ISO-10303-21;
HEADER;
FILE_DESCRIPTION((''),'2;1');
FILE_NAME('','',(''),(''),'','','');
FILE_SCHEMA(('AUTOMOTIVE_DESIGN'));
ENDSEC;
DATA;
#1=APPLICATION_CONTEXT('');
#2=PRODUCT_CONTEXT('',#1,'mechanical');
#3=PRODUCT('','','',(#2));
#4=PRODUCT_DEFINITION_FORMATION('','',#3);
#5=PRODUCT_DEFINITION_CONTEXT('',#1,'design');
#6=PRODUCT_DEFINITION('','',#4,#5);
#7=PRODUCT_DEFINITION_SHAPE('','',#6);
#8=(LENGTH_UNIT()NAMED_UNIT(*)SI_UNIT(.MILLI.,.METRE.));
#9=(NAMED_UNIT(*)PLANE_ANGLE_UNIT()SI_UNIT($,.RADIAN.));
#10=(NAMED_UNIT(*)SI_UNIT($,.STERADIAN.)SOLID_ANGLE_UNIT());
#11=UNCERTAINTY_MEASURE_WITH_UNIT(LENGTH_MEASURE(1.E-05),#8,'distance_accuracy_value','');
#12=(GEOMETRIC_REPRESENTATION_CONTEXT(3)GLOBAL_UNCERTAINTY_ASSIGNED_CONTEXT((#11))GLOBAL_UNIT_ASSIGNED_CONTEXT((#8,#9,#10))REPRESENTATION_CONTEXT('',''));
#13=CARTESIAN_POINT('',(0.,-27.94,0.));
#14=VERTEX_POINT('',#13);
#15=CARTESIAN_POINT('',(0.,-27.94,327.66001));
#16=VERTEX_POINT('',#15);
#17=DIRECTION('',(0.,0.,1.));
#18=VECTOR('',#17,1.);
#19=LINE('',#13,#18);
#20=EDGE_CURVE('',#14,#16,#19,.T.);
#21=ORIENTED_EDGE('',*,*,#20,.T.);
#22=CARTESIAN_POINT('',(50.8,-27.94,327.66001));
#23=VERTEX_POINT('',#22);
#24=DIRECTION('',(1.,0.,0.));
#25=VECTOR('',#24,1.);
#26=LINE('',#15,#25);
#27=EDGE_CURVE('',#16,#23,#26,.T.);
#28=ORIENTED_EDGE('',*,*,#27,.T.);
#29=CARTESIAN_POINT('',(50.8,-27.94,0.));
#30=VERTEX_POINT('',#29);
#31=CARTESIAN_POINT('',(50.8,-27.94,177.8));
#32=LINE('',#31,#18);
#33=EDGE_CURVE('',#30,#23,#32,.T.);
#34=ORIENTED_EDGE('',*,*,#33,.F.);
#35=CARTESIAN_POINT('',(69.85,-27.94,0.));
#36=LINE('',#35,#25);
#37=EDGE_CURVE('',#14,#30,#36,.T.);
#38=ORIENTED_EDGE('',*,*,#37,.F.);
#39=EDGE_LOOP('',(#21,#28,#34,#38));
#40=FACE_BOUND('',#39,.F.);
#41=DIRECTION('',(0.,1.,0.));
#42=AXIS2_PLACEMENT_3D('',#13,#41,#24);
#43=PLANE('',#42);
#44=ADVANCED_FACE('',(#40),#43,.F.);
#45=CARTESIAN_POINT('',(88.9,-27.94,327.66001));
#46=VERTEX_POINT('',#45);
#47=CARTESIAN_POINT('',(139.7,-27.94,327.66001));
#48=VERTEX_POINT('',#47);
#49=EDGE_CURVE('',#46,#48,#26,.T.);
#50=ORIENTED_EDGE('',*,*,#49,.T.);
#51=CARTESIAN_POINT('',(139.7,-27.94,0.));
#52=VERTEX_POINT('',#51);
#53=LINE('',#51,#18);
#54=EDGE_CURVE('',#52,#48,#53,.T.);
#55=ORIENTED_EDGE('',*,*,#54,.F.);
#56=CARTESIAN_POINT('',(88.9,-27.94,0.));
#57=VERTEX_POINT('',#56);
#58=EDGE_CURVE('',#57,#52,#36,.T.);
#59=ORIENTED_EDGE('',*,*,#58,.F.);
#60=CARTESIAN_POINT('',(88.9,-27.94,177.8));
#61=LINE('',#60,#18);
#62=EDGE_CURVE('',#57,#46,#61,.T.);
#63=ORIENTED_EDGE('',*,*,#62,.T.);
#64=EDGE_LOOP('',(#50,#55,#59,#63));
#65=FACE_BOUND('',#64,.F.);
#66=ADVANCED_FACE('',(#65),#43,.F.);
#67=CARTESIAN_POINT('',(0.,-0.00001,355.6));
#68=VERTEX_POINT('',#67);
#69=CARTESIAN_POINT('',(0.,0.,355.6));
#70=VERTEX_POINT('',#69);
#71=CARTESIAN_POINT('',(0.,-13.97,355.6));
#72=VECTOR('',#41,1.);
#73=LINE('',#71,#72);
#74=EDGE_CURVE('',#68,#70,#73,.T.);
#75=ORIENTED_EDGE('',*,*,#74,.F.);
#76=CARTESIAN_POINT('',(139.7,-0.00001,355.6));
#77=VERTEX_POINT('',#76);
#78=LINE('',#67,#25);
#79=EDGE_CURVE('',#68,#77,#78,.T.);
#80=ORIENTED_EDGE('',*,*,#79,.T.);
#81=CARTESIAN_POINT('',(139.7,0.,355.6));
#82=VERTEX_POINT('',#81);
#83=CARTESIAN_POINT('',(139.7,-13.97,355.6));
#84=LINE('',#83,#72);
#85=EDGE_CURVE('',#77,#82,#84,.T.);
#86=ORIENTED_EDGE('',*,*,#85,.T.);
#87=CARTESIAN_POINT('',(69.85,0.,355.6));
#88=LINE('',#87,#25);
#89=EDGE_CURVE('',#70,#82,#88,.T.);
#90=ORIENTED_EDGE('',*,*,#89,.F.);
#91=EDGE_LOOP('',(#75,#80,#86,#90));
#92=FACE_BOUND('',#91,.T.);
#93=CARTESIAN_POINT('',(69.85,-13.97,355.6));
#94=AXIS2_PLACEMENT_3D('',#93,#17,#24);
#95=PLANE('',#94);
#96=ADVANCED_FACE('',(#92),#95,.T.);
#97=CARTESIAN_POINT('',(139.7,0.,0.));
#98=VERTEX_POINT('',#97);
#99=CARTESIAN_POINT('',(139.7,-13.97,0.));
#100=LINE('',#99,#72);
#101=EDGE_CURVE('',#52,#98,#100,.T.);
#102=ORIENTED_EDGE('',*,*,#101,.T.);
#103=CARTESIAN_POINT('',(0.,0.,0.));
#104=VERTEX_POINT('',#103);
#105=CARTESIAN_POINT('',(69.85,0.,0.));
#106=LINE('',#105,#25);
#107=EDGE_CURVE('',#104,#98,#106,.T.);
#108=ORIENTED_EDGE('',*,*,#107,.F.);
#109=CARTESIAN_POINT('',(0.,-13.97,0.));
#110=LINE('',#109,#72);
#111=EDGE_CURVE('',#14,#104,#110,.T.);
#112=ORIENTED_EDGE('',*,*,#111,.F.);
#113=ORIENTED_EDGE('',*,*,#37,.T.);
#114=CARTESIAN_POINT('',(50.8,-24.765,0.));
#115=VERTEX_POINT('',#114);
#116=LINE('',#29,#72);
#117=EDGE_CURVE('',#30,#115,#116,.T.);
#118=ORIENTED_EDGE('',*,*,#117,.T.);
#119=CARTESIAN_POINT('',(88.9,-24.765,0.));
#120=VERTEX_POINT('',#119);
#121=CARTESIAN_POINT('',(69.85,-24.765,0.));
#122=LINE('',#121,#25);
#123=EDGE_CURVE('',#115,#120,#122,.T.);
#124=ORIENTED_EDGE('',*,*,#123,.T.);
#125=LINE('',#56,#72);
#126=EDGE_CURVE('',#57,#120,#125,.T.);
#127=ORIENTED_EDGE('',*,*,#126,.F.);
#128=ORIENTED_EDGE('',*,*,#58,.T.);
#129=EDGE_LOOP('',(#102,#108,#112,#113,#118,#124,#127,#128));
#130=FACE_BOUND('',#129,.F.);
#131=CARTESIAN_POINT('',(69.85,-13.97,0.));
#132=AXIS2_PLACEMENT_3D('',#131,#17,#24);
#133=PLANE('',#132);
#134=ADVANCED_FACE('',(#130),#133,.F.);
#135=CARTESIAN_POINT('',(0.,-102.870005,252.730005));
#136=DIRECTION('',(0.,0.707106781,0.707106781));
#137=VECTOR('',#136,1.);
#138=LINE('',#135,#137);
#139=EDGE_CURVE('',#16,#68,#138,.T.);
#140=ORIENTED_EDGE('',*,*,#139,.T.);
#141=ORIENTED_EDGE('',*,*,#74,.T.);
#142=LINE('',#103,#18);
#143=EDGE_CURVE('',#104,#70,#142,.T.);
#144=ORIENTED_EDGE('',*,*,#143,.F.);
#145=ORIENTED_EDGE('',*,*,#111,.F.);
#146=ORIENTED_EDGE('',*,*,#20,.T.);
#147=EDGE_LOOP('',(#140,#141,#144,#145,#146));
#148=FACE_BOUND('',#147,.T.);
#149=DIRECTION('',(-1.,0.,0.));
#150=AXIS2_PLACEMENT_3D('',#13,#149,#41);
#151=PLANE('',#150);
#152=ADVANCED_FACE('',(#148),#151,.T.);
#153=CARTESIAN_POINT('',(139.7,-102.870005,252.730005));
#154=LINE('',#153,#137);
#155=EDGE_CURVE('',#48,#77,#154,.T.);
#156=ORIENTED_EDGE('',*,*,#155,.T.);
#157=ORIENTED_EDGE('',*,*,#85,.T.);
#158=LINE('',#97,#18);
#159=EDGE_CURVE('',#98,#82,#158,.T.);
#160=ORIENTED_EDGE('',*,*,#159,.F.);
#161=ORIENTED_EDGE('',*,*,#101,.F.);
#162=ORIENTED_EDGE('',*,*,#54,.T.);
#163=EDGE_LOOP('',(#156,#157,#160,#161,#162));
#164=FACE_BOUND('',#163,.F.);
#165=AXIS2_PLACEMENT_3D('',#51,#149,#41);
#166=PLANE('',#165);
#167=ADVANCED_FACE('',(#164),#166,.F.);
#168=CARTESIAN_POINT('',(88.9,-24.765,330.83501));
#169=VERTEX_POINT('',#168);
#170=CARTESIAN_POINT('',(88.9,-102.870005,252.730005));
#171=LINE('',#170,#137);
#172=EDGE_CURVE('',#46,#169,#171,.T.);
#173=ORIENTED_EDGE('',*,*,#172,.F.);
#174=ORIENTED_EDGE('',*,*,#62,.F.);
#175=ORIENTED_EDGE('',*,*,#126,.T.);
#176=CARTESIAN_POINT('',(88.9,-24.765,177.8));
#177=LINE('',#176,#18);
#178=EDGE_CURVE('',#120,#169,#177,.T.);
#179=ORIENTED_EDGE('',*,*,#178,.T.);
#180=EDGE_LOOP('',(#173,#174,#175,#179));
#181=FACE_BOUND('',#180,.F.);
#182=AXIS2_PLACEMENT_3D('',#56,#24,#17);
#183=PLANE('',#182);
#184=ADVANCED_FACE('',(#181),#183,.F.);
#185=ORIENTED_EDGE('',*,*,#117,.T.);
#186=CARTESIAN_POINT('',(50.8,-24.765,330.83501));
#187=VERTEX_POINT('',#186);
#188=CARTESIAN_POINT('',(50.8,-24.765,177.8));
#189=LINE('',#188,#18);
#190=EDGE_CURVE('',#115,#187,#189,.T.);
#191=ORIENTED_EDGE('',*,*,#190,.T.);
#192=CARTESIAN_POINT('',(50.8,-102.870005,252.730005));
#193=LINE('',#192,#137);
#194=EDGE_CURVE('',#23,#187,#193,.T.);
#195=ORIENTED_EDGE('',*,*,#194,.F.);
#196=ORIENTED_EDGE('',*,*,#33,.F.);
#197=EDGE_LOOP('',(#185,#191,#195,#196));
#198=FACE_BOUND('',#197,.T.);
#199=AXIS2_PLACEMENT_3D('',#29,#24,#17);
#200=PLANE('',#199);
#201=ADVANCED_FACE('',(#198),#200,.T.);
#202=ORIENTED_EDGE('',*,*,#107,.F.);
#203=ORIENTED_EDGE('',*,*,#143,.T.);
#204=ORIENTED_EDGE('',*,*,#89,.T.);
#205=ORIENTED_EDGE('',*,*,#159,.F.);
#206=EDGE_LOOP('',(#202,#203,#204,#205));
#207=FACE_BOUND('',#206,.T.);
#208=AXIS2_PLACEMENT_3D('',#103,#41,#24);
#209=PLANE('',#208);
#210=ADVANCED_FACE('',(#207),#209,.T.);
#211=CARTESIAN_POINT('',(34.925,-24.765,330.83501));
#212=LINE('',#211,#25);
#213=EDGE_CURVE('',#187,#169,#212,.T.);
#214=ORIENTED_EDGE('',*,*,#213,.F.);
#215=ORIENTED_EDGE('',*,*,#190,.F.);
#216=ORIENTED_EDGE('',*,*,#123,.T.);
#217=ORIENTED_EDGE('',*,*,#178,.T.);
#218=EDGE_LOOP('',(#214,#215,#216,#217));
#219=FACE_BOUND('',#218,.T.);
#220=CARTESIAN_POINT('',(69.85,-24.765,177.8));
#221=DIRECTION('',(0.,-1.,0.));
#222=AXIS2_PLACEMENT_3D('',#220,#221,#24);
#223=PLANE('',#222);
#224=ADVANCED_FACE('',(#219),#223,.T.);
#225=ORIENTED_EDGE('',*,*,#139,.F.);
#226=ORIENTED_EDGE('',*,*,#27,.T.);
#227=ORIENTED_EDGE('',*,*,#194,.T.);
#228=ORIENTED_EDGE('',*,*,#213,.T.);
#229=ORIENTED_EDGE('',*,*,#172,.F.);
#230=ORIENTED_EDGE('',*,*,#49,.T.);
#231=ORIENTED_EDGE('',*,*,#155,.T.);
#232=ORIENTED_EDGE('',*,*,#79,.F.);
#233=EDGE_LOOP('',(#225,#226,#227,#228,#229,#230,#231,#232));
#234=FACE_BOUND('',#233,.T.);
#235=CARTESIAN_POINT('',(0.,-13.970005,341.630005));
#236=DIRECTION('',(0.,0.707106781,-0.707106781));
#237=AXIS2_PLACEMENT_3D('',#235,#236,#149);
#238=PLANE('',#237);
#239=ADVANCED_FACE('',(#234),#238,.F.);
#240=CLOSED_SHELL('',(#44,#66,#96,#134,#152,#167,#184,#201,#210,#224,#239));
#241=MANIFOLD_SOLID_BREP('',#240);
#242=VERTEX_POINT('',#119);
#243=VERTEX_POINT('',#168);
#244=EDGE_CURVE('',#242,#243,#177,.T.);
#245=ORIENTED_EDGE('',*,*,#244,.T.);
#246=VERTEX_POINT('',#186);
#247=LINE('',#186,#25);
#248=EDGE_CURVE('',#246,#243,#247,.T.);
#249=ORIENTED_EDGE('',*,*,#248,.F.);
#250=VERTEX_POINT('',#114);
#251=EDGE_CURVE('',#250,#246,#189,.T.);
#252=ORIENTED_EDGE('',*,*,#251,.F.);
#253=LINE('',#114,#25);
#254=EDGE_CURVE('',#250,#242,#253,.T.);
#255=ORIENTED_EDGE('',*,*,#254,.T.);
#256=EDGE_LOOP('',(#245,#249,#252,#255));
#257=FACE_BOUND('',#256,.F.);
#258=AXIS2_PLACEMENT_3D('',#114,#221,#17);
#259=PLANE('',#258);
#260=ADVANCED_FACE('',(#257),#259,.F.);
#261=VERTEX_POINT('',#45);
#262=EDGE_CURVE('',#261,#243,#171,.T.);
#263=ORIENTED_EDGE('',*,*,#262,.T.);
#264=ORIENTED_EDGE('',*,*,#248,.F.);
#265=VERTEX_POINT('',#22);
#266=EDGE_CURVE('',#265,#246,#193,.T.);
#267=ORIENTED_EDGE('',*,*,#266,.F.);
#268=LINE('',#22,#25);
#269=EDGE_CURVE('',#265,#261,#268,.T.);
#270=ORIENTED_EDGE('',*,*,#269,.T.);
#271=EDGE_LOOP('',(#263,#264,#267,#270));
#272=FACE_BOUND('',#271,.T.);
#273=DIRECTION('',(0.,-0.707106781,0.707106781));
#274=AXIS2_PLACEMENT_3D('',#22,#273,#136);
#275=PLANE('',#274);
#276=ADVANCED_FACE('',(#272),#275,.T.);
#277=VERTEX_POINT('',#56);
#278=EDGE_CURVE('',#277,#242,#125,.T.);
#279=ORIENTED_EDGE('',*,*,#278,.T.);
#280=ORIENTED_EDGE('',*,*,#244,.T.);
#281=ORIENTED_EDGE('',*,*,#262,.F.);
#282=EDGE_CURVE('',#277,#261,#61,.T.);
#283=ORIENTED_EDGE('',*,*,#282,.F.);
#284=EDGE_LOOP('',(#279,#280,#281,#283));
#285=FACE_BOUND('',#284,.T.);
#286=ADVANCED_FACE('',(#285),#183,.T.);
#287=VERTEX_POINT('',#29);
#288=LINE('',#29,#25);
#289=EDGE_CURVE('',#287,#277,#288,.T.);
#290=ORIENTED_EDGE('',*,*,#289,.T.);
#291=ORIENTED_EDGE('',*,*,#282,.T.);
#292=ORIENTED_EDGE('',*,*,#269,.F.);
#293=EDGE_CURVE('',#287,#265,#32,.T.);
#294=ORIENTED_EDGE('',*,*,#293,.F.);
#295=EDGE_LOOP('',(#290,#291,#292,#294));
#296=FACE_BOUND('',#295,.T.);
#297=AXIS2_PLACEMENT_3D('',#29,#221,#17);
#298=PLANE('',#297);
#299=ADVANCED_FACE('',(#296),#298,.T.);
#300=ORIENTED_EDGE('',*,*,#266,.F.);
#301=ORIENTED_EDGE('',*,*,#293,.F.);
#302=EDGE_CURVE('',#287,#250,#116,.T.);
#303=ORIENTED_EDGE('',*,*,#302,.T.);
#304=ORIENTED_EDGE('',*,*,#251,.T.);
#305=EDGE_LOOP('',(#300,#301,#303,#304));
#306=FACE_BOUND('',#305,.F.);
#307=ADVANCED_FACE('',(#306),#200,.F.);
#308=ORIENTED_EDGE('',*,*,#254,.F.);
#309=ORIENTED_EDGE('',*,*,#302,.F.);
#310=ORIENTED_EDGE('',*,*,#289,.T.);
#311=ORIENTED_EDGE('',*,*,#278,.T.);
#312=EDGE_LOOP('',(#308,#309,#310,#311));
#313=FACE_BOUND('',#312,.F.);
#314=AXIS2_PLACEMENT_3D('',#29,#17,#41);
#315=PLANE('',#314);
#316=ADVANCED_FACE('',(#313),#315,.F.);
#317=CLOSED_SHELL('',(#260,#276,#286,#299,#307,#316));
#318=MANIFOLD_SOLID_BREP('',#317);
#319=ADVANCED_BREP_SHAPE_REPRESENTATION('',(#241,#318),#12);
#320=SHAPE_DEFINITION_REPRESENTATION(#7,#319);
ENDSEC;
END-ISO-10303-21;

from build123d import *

# Parameters (mm, degrees)
F0_W     = 139.7
F0_H     = 27.94
F1_DEPTH = 355.6
F2_SIZE  = 27.93999
F3_W     = 38.1
F3_H     = 355.6
F4_DEPTH = 3.175
F5_DEPTH = 38.1


# Not quite as in the source:
# - a fillet or chamfer is up to 0.001 mm smaller than in the source, because OpenCascade refuses the exact size


with BuildPart() as f1:
    # F0 (on Top) → F1 (new body)
    with BuildSketch(Plane.XY):
        with Locations((69.85, -13.97)):
            Rectangle(F0_W, F0_H)
    extrude(amount=F1_DEPTH)

    # F2 (size 27.94 in the source; OpenCascade refuses exactly that, so slightly less here)
    f2_edges = [f1.edges().sort_by_distance(p)[0] for p in [
        (69.85, -27.94, 355.6),
    ]]
    chamfer(f2_edges, length=F2_SIZE)

    # F3 (on face) → F4 (cut)
    with BuildSketch(Plane.XZ.offset(27.94)):
        with Locations((69.85, 177.8)):
            Rectangle(F3_W, F3_H)
    extrude(amount=-F4_DEPTH, mode=Mode.SUBTRACT)


with BuildPart() as f5:
    # F5 (new, through all): a face of the model
    f5_faces = [f1.part.faces().sort_by_distance(p)[0] for p in [
        (50.8, -26.3499485697, 164.6250307152),
    ]]
    extrude(f5_faces, amount=F5_DEPTH)


solid = Compound([f1.part, f5.part])
